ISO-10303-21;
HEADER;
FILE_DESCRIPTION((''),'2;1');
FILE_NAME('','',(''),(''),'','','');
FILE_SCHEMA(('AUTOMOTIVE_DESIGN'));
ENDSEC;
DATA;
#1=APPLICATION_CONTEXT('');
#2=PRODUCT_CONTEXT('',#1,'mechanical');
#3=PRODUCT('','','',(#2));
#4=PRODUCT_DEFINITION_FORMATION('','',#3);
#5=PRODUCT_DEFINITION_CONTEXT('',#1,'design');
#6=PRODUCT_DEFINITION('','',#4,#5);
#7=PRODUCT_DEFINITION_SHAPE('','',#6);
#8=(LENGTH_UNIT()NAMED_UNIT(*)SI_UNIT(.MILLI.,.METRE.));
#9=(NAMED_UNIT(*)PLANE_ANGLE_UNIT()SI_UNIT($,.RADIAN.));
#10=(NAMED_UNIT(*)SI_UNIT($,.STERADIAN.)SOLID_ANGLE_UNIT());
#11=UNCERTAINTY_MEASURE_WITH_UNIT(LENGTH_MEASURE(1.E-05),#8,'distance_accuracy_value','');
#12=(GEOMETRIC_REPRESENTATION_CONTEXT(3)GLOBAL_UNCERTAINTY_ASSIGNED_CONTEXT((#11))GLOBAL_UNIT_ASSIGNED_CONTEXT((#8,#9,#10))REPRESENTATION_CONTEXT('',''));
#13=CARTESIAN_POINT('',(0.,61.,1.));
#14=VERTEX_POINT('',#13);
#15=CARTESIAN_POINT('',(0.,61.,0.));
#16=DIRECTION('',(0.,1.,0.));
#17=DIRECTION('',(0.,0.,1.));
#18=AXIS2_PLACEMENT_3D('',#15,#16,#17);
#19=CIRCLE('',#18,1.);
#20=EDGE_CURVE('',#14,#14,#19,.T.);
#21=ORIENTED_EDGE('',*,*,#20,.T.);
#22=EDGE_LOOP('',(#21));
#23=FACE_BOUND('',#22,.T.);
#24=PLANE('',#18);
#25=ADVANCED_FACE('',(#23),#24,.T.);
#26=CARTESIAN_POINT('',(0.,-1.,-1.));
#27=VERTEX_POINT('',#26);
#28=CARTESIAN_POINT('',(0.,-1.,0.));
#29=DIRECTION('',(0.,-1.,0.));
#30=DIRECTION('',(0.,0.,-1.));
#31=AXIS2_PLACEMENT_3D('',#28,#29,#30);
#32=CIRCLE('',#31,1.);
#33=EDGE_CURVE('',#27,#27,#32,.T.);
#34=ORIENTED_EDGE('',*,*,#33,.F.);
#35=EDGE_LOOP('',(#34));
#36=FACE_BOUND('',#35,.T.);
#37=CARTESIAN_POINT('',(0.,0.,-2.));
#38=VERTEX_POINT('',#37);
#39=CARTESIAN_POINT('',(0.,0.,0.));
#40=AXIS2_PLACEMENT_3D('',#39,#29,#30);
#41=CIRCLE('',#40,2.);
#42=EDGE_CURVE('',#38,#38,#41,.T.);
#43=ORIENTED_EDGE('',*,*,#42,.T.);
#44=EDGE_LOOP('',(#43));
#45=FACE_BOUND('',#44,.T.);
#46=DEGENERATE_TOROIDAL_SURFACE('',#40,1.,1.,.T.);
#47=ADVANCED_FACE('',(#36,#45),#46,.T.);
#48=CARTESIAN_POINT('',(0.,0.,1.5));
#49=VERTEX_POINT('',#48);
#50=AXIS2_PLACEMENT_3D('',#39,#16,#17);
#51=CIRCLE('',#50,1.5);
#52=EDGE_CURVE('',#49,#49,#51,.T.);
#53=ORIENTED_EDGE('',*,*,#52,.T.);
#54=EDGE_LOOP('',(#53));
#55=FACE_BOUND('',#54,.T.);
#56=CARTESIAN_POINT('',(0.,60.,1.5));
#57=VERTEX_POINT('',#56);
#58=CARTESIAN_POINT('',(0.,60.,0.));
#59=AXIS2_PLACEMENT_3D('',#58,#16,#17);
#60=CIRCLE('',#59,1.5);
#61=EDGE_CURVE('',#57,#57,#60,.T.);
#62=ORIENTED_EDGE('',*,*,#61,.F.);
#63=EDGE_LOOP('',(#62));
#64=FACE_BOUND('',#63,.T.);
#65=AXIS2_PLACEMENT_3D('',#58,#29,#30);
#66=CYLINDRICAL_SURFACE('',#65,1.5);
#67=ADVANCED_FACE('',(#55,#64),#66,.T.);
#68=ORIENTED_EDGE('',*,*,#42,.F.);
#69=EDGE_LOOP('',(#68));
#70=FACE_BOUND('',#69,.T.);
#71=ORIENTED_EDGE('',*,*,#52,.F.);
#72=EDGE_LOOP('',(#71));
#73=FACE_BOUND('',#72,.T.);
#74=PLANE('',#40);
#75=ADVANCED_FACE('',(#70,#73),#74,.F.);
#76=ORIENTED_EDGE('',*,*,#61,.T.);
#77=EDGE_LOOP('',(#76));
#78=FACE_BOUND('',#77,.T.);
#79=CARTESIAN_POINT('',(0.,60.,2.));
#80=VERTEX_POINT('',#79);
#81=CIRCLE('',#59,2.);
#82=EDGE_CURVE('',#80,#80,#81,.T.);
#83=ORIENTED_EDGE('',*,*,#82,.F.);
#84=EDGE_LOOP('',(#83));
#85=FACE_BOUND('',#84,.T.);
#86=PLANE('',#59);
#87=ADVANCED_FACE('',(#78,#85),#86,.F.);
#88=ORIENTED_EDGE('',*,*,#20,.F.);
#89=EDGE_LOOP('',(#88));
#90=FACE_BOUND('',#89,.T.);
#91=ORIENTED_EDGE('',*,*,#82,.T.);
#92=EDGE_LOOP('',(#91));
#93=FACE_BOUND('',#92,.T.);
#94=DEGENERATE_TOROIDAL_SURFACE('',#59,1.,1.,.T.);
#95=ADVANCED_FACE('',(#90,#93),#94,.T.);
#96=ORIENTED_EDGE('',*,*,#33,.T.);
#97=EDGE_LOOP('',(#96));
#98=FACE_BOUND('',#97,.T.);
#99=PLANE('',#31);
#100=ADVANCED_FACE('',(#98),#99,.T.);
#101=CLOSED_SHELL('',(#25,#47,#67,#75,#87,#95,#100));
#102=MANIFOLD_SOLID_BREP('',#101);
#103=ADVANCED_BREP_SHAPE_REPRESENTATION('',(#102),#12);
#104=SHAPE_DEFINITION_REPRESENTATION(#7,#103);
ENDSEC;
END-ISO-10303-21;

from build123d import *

# Parameters (mm, degrees)
SZKIC1_R                    = 1.5
DODANIE_WYCI_GNI_CIE1_DEPTH = 60
SZKIC2_R                    = 2
DODANIE_WYCI_GNI_CIE2_DEPTH = 1
ZAOKR_GLENIE1_R             = 1
DODANIE_WYCI_GNI_CIE3_START = 1
SZKIC3_R                    = 2
DODANIE_WYCI_GNI_CIE3_DEPTH = 1
ZAOKR_GLENIE2_R             = 1


with BuildPart() as part:
    # Szkic1 → Dodanie-wyciągnięcie1 (new body)
    with BuildSketch(Plane(origin=(0, 0, 0), x_dir=(1, 0, 0), z_dir=(0, 1, 0))):
        with Locations(Location((0, 0, 0), (0, 0, 270))):
            Circle(SZKIC1_R)
    extrude(amount=DODANIE_WYCI_GNI_CIE1_DEPTH)

    # Szkic2 → Dodanie-wyciągnięcie2 (add)
    with BuildSketch(Plane(origin=(0, 60, 0), x_dir=(1, 0, 0), z_dir=(0, 1, 0))):
        with Locations(Location((0, 0, 0), (0, 0, 270))):
            Circle(SZKIC2_R)
    extrude(amount=DODANIE_WYCI_GNI_CIE2_DEPTH)

    # Zaokrąglenie1
    zaokr_glenie1_edges = [part.edges().sort_by_distance(p)[0] for p in [
        (0, 61, -2),
    ]]
    fillet(zaokr_glenie1_edges, radius=ZAOKR_GLENIE1_R - 0.0001)  # a hair under: the kernel refuses the full size

    # Szkic3 → Dodanie-wyciągnięcie3 (add)
    with BuildSketch(Plane.XZ.offset(DODANIE_WYCI_GNI_CIE3_START)):
        with Locations(Location((0, 0, 0), (0, 0, 270))):
            Circle(SZKIC3_R)
    extrude(amount=-DODANIE_WYCI_GNI_CIE3_DEPTH)

    # Zaokrąglenie2
    zaokr_glenie2_edges = [part.edges().sort_by_distance(p)[0] for p in [
        (0, -1, 2),
    ]]
    fillet(zaokr_glenie2_edges, radius=ZAOKR_GLENIE2_R - 0.0001)  # a hair under: the kernel refuses the full size


solid = part.part
